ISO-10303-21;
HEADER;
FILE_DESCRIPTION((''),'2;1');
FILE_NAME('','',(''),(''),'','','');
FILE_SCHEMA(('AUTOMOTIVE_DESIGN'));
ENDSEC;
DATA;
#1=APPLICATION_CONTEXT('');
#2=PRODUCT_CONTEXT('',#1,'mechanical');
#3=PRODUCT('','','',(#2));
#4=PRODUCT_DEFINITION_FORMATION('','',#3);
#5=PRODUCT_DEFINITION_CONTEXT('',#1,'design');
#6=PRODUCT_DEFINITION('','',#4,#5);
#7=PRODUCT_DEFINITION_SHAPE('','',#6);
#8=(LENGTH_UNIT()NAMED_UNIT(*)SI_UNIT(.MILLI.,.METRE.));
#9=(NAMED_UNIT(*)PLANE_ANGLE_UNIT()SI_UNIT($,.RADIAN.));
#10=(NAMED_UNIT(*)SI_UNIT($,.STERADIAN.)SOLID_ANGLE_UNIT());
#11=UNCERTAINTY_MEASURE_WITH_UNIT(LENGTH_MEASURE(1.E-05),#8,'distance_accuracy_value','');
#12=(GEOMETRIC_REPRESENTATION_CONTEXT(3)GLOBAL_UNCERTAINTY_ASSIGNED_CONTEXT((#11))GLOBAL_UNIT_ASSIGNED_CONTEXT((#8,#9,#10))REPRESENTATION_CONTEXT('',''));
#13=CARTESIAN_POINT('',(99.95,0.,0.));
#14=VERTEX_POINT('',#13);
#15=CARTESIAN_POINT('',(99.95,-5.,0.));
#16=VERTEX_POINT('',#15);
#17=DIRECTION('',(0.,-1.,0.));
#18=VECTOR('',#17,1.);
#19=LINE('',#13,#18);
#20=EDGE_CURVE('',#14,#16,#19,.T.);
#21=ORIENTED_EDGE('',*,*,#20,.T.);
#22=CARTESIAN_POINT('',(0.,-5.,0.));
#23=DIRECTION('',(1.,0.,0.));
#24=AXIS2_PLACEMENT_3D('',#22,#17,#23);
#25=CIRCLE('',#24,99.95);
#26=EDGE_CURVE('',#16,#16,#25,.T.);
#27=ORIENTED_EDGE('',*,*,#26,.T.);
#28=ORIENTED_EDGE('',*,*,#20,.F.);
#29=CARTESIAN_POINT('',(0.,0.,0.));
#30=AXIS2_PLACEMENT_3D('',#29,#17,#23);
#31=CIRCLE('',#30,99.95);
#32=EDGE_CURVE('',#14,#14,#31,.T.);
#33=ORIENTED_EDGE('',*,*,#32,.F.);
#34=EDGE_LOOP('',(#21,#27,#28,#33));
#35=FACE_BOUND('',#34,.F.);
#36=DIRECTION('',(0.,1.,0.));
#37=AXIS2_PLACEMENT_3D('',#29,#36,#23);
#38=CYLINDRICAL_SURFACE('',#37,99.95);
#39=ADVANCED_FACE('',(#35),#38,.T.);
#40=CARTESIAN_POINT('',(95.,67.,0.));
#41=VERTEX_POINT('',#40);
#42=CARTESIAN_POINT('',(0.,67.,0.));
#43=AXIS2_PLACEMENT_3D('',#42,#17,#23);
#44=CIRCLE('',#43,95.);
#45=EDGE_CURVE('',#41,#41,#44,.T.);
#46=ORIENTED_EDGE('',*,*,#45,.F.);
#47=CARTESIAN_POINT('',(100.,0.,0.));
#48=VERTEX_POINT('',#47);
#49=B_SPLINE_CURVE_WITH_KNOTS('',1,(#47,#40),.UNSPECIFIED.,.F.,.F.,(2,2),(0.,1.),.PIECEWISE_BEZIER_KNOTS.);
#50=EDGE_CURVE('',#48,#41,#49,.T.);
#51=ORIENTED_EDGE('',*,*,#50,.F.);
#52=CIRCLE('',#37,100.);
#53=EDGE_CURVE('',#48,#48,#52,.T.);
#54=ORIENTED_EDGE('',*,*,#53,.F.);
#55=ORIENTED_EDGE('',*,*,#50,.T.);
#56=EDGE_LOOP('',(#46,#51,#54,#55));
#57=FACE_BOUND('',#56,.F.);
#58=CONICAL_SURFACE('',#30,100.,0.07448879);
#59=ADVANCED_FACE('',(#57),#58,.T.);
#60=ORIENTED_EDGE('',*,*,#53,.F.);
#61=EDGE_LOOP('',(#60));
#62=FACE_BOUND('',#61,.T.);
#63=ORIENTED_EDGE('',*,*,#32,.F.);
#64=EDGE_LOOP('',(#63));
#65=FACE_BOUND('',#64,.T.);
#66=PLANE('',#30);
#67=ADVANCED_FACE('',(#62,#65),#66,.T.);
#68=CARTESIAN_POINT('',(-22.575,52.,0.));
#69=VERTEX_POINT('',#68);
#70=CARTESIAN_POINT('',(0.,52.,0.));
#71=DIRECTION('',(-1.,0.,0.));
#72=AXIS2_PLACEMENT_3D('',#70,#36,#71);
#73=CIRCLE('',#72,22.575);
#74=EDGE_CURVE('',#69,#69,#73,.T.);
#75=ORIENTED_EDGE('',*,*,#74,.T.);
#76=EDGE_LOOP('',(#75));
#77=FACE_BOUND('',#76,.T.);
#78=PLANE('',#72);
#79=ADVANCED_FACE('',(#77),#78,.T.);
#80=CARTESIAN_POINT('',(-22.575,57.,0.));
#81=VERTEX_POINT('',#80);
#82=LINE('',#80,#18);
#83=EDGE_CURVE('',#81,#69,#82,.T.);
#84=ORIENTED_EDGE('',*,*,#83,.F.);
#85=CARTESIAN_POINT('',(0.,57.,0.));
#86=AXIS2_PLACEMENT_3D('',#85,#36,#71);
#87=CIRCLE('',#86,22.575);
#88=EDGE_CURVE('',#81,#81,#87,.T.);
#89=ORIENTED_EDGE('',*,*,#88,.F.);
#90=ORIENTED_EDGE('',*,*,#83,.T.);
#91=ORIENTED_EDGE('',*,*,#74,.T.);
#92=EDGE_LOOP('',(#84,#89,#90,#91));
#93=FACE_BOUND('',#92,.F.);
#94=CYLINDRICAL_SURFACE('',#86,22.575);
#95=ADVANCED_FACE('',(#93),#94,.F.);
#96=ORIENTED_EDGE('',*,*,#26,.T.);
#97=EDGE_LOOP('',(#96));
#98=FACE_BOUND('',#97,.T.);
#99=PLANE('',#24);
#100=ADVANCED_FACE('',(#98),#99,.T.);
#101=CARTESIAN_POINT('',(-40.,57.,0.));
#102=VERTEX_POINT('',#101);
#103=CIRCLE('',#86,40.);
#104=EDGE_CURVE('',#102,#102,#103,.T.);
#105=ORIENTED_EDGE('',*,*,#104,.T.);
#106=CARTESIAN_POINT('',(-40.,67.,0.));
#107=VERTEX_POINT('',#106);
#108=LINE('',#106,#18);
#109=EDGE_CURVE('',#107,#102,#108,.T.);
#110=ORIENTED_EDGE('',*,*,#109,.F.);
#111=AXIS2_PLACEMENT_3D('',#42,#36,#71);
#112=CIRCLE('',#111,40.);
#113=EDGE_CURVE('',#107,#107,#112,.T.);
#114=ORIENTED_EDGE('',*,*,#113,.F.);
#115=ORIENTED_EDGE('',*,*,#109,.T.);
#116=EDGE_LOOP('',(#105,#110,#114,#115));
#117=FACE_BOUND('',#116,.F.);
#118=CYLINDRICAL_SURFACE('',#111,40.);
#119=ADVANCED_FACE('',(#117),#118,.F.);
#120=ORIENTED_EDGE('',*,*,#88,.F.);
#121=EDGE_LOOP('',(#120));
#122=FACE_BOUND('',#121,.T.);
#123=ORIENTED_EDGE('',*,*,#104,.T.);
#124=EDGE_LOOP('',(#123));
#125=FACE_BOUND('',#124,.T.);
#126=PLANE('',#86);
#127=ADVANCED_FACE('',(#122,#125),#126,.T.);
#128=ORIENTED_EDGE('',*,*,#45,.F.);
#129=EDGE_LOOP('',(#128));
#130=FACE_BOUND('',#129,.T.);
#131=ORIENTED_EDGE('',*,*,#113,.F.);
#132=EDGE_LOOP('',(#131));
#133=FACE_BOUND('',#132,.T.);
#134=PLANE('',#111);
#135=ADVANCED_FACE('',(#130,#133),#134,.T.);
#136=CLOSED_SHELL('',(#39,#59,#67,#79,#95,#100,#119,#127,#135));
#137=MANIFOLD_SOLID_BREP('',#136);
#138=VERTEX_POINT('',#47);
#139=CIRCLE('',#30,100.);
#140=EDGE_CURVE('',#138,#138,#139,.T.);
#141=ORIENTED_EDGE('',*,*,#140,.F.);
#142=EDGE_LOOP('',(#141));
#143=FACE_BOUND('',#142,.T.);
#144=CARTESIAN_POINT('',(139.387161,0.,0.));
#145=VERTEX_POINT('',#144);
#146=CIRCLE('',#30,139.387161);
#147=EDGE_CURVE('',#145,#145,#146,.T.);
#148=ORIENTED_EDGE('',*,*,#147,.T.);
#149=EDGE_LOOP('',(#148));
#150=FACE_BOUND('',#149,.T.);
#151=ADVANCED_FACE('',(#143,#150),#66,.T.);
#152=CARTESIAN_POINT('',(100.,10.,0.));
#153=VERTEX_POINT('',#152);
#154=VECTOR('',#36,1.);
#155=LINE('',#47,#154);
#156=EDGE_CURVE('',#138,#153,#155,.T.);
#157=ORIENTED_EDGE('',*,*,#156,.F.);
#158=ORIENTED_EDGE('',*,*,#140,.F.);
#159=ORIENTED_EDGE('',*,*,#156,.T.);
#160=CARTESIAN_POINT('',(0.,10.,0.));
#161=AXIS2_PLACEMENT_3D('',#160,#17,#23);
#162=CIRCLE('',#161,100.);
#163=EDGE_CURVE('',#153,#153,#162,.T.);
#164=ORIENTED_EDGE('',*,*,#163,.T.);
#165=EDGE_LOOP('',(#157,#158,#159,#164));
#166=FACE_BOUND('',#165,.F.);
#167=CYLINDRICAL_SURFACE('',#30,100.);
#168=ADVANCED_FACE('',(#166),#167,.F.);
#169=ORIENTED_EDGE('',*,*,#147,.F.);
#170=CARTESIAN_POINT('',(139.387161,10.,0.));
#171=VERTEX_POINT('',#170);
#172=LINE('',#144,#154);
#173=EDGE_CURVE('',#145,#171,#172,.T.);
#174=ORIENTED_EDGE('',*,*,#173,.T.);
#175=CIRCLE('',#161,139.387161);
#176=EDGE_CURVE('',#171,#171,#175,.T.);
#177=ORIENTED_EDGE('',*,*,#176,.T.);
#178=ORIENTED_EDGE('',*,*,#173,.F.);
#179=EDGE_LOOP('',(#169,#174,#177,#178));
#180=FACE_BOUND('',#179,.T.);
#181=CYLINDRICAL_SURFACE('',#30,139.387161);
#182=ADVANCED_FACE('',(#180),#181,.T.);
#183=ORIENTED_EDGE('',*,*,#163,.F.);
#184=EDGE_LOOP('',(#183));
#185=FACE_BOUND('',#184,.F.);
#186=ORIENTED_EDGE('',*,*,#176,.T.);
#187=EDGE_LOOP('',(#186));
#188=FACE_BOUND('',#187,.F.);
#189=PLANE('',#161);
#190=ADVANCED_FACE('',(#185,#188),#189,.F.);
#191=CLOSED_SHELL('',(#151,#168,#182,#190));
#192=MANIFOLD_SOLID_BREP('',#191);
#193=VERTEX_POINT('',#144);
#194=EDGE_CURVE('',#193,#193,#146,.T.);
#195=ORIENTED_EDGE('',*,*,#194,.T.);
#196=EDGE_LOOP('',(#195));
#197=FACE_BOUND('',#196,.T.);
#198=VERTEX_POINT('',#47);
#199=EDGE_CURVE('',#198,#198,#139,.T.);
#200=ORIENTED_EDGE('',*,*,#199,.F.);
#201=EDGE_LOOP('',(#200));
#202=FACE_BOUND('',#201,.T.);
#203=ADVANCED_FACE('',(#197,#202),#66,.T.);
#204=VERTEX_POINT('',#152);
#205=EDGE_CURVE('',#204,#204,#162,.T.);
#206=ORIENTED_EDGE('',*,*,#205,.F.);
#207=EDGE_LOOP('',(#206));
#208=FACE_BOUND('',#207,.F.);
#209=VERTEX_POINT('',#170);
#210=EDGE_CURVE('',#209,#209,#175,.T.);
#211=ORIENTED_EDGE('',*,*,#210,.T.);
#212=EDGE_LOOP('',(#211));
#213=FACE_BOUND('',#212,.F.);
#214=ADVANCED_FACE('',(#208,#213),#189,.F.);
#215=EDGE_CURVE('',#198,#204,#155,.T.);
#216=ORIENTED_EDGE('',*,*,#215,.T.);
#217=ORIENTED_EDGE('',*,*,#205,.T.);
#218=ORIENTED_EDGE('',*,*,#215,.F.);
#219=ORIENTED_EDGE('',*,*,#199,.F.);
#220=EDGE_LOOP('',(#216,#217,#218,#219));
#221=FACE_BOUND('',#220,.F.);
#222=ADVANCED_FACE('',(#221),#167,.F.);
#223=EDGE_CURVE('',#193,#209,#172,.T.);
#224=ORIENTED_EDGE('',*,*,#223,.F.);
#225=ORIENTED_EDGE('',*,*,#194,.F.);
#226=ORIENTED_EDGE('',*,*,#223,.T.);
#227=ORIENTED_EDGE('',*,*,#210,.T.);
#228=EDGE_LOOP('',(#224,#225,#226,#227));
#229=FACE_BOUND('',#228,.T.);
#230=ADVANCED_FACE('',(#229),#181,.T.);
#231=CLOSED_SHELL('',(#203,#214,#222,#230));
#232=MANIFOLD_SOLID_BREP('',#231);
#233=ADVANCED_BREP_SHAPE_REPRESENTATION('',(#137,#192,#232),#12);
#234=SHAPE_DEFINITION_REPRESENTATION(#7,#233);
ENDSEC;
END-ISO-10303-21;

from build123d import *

# Parameters (mm, degrees)
F0_R      = 139.3871605201
F0_R_2    = 100
F1_DEPTH  = 10
F2_DEPTH  = 10
F0_R_3    = 99.95
F4_DEPTH  = 5
F3_R      = 100
F6_R      = 95
F8_R      = 40
F9_DEPTH  = 10
F10_R     = 22.575
F11_DEPTH = 5


# Not quite as in the source:
# - a feature names something its author has since deleted; it is built from what else it names


with BuildPart() as f1:
    # F0 (on Front) → F1 (new body)
    with BuildSketch(Plane.XZ):
        Circle(F0_R)
        Circle(F0_R_2, mode=Mode.SUBTRACT)
    extrude(amount=-F1_DEPTH)


with BuildPart() as f2:
    # F0 (on Front) → F2 (new body)
    with BuildSketch(Plane.XZ):
        Circle(F0_R)
        Circle(F0_R_2, mode=Mode.SUBTRACT)
    extrude(amount=-F2_DEPTH)


with BuildPart() as f4:
    # F0 (on Front) → F4 (new body)
    with BuildSketch(Plane.XZ):
        Circle(F0_R_3)
    extrude(amount=F4_DEPTH)

    # F3 (on face) → F7 section 0
    with BuildSketch(Plane.XZ):
        Circle(F3_R)
    # F6 (on offset) → F7 section 1
    with BuildSketch(Plane(origin=(0, 67, 0), x_dir=(-1, 0, 0), z_dir=(0, 1, 0))):
        Circle(F6_R)
    loft()

    # F8 (on offset) → F9 (cut)
    with BuildSketch(Plane(origin=(0, 67, 0), x_dir=(-1, 0, 0), z_dir=(0, 1, 0))):
        Circle(F8_R)
    extrude(amount=-F9_DEPTH, mode=Mode.SUBTRACT)

    # F10 (on face) → F11 (cut)
    with BuildSketch(Plane(origin=(0, 57, 0), x_dir=(-1, 0, 0), z_dir=(0, 1, 0))):
        Circle(F10_R)
    extrude(amount=-F11_DEPTH, mode=Mode.SUBTRACT)


solid = Compound([f1.part, f2.part, f4.part])
